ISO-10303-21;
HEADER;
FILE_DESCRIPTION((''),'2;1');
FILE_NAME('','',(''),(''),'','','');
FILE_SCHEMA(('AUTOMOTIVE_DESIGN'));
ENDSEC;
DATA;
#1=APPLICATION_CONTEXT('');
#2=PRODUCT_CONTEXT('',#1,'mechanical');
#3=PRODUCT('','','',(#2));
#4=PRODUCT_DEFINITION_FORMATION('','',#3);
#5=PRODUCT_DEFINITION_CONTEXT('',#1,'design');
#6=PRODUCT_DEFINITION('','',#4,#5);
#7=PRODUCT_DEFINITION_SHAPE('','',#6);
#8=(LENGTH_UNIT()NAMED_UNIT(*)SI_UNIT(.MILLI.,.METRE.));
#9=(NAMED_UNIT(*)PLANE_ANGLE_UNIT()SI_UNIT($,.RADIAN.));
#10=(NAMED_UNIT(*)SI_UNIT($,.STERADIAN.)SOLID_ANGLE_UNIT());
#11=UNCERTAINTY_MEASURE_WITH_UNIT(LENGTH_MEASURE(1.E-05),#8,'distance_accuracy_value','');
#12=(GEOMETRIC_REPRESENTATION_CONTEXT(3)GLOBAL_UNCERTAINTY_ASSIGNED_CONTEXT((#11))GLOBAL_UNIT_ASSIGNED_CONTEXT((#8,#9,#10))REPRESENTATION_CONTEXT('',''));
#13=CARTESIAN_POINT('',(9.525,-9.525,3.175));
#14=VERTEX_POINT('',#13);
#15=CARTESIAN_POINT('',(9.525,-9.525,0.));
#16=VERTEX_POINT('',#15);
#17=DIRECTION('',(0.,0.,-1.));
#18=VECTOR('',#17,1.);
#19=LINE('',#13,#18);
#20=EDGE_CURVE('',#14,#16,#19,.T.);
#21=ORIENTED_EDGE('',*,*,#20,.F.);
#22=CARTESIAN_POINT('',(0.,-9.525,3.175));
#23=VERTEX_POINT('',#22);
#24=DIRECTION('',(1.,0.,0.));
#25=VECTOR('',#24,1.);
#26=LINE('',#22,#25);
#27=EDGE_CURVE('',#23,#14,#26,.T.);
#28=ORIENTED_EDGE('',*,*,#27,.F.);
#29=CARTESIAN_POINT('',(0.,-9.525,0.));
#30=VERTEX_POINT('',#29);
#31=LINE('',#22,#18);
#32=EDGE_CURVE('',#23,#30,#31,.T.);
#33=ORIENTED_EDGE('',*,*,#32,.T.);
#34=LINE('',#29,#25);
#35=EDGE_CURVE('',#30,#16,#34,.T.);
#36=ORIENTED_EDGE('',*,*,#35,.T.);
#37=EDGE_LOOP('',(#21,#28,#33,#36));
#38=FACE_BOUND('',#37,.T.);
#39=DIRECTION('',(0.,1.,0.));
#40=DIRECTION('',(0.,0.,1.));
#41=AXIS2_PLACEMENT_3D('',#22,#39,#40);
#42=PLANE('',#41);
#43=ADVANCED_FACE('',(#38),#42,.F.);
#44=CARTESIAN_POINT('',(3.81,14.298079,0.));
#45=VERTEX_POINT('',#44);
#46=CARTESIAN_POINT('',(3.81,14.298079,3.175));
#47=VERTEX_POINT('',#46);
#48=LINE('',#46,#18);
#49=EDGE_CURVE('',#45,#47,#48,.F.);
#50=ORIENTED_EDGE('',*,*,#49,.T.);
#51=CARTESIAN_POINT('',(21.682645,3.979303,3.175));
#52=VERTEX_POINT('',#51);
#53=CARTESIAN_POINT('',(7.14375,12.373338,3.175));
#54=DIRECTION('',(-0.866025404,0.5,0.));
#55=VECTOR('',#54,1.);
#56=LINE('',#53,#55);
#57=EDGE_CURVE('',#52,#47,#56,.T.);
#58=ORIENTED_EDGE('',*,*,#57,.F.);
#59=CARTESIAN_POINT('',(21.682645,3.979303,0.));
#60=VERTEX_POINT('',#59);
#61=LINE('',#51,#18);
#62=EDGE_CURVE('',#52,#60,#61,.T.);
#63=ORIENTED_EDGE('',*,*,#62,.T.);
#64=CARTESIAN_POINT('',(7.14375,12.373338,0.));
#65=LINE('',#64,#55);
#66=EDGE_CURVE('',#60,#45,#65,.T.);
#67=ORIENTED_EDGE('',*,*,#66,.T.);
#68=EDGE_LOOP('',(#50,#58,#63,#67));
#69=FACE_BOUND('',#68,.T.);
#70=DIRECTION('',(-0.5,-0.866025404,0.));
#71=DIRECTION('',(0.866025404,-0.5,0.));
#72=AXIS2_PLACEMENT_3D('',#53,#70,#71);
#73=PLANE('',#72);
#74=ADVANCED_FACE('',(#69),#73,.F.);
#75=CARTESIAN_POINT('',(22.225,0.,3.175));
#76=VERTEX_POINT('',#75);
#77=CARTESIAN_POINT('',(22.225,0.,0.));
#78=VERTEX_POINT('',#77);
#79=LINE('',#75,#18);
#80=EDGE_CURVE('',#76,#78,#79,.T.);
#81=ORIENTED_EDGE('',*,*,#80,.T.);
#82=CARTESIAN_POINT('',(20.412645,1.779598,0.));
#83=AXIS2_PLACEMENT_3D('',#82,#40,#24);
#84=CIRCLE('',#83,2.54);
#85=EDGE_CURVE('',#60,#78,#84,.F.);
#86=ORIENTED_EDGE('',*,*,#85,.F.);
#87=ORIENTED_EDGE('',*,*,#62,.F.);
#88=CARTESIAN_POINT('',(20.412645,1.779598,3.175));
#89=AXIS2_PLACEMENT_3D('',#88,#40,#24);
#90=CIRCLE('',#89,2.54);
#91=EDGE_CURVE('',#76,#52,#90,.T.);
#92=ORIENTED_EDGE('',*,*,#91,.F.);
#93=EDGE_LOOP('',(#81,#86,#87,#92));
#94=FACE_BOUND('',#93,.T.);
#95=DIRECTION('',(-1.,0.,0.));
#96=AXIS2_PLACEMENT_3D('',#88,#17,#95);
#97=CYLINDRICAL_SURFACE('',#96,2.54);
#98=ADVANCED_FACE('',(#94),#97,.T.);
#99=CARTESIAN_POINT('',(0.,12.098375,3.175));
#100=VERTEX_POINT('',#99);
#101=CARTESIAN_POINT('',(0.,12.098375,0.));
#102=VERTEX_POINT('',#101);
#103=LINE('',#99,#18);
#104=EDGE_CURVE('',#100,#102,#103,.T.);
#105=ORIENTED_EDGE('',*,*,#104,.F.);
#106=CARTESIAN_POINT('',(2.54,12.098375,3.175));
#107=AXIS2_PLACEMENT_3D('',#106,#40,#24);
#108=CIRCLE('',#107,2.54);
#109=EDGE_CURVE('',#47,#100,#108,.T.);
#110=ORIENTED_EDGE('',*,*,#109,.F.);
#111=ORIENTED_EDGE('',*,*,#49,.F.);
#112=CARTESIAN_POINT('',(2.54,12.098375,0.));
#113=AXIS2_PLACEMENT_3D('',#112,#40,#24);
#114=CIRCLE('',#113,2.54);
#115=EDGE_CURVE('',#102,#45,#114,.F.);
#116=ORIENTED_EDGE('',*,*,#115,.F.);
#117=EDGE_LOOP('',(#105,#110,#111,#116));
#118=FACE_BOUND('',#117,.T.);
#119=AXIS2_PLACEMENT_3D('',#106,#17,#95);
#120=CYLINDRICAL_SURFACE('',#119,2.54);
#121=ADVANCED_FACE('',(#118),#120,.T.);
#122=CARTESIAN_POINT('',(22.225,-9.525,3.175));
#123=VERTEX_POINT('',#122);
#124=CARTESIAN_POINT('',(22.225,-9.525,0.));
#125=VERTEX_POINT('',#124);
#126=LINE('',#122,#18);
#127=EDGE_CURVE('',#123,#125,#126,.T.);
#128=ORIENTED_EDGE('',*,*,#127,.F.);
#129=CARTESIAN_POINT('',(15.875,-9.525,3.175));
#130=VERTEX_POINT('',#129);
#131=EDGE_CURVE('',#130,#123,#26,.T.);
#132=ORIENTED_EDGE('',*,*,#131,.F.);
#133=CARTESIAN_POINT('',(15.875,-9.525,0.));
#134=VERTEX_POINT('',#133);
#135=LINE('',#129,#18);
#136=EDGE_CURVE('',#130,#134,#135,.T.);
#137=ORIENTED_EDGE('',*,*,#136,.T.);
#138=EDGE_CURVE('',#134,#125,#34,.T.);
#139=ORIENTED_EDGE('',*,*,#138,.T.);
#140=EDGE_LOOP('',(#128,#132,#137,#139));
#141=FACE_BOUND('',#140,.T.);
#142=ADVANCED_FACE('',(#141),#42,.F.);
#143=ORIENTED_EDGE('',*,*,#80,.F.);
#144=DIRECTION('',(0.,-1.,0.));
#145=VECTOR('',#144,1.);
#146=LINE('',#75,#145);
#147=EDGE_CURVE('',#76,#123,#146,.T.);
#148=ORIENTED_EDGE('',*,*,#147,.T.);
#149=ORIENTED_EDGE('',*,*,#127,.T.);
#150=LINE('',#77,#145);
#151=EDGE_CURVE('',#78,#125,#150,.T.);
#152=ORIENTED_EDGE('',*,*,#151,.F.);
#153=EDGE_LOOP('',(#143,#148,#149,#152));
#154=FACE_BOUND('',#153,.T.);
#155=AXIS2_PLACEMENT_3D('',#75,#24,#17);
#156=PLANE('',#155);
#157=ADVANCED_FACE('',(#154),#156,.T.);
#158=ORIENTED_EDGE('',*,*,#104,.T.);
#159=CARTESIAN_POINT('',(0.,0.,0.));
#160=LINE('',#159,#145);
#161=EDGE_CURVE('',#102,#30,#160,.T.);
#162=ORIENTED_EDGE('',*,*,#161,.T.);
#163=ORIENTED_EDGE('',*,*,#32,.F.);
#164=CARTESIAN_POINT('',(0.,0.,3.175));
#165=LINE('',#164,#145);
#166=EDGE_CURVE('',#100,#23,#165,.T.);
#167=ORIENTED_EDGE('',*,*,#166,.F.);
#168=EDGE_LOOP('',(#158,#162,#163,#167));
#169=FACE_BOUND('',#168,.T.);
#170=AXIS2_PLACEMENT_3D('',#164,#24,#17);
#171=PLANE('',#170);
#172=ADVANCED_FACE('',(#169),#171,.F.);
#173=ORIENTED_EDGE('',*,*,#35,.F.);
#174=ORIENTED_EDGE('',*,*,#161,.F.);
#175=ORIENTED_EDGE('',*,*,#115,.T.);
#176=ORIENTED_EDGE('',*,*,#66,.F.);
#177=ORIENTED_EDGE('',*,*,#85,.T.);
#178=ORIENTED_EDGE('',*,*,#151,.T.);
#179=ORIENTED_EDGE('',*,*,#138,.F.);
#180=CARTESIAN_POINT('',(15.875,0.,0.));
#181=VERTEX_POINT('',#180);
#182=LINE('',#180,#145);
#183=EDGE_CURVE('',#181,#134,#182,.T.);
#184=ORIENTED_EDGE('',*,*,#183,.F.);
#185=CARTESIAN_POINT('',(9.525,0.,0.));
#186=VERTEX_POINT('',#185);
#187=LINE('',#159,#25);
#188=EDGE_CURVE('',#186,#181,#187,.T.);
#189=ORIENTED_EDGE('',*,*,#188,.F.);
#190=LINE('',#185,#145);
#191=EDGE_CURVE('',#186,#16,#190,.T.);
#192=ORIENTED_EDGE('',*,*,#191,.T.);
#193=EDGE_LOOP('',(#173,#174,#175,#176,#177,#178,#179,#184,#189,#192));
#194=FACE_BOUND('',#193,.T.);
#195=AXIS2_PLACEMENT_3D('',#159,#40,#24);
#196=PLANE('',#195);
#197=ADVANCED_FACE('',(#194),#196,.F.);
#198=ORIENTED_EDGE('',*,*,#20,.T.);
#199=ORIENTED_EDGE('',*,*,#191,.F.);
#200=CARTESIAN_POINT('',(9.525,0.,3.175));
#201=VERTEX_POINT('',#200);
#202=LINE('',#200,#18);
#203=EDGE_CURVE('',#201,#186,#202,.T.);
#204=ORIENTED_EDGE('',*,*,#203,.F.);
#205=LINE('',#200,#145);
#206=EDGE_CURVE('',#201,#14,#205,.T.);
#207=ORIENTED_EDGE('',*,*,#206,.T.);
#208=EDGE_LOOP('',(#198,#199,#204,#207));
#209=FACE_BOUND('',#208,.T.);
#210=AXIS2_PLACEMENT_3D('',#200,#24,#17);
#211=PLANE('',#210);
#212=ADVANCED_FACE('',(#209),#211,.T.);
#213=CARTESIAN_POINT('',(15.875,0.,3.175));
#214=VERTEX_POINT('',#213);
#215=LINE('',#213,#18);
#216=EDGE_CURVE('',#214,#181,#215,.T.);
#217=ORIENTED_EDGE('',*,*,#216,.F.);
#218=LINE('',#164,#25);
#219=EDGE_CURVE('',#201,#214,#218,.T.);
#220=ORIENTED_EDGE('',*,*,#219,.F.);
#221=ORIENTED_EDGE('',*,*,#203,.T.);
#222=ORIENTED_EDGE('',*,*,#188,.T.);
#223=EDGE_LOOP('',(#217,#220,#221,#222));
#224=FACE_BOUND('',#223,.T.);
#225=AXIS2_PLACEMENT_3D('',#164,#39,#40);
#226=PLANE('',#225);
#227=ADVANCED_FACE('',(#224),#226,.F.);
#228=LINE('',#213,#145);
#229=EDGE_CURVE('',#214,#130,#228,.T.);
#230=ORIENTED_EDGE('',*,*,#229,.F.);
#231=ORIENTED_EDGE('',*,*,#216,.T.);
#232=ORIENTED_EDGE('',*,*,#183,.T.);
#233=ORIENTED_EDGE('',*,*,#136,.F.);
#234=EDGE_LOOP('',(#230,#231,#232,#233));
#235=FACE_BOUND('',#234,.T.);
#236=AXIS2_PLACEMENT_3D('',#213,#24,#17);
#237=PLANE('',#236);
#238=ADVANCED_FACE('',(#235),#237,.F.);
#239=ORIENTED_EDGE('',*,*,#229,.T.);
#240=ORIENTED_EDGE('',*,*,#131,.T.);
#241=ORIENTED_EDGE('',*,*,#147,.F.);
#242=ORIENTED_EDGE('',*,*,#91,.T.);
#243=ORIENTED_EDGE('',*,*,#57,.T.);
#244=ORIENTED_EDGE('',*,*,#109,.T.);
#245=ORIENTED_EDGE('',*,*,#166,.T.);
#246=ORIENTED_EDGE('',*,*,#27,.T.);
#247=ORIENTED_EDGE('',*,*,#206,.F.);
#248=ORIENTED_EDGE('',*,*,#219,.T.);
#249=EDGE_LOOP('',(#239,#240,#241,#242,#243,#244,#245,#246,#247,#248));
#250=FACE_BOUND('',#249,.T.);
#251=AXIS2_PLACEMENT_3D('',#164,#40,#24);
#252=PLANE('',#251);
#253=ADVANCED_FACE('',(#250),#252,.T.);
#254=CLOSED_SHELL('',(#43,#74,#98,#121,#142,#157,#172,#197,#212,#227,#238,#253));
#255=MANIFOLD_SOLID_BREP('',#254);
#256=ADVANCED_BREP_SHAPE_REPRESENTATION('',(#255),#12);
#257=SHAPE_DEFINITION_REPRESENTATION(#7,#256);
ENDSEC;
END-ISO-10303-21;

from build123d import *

# Parameters (mm, degrees)
SKETCH1_W           = 9.525
SKETCH1_H           = 9.525
SKETCH1_W_2         = 6.35
BOSS_EXTRUDE1_DEPTH = 3.175
FILLET1_R           = 2.54


with BuildPart() as part:
    # Sketch1 → Boss-Extrude1 (new body)
    with BuildSketch(Plane.XY):
        with Locations((4.7625, -4.7625)):
            Rectangle(SKETCH1_W, SKETCH1_H)
        Polygon((28.575, 0), (0, 16.497783942), (0, 0), align=None)
        with Locations((19.05, -4.7625)):
            Rectangle(SKETCH1_W_2, SKETCH1_H)
    extrude(amount=BOSS_EXTRUDE1_DEPTH)

    # Fillet1
    # the kernel refuses this fillet: 2.54 mm, written as the material it takes off along each edge
    with BuildSketch(Plane(origin=(28.575, 0, -19.896514347), x_dir=(-0.8660254037844417, 0.4999999999999948, 0), z_dir=(0, 0, 1))) as fillet1_piece_1:
        with BuildLine():
            CenterArc((7.958605739, 2.54), FILLET1_R, 165.522487814, 104.477512186)
            Line((5.499261314, 3.175), (5.450074426, 3.1877))
            ThreePointArc((5.450074426, 3.1877), (2.724230657, 1.631494091), (-0.0254, 0.043994091))
            Line((-0.0254, 0.043994091), (0, -0.0508))
            Line((0, -0.0508), (7.958605739, -0.0508))
            Line((7.958605739, -0.0508), (7.958605739, 0))
        make_face()
    extrude(amount=42.968028694, mode=Mode.SUBTRACT)
    with BuildSketch(Plane(origin=(0, 16.497783942, -10.998522628), x_dir=(0, -1, 0), z_dir=(0, 0, 1))) as fillet1_piece_2:
        with BuildLine():
            CenterArc((FILLET1_R * 1.73205080757, FILLET1_R), FILLET1_R, 150, 120)
            Line((FILLET1_R * 0.866025403784, FILLET1_R * 1.5), (FILLET1_R * 0.848704895709, FILLET1_R * 1.51))
            Line((FILLET1_R * 0.848704895709, FILLET1_R * 1.51), (-FILLET1_R * 0.0346410161514, -FILLET1_R * 0.02))
            Line((-FILLET1_R * 0.0346410161514, -FILLET1_R * 0.02), (FILLET1_R * 1.73205080757, -FILLET1_R * 0.02))
            Line((FILLET1_R * 1.73205080757, -FILLET1_R * 0.02), (FILLET1_R * 1.73205080757, 0))
        make_face()
    extrude(amount=25.172045256, mode=Mode.SUBTRACT)


solid = part.part
